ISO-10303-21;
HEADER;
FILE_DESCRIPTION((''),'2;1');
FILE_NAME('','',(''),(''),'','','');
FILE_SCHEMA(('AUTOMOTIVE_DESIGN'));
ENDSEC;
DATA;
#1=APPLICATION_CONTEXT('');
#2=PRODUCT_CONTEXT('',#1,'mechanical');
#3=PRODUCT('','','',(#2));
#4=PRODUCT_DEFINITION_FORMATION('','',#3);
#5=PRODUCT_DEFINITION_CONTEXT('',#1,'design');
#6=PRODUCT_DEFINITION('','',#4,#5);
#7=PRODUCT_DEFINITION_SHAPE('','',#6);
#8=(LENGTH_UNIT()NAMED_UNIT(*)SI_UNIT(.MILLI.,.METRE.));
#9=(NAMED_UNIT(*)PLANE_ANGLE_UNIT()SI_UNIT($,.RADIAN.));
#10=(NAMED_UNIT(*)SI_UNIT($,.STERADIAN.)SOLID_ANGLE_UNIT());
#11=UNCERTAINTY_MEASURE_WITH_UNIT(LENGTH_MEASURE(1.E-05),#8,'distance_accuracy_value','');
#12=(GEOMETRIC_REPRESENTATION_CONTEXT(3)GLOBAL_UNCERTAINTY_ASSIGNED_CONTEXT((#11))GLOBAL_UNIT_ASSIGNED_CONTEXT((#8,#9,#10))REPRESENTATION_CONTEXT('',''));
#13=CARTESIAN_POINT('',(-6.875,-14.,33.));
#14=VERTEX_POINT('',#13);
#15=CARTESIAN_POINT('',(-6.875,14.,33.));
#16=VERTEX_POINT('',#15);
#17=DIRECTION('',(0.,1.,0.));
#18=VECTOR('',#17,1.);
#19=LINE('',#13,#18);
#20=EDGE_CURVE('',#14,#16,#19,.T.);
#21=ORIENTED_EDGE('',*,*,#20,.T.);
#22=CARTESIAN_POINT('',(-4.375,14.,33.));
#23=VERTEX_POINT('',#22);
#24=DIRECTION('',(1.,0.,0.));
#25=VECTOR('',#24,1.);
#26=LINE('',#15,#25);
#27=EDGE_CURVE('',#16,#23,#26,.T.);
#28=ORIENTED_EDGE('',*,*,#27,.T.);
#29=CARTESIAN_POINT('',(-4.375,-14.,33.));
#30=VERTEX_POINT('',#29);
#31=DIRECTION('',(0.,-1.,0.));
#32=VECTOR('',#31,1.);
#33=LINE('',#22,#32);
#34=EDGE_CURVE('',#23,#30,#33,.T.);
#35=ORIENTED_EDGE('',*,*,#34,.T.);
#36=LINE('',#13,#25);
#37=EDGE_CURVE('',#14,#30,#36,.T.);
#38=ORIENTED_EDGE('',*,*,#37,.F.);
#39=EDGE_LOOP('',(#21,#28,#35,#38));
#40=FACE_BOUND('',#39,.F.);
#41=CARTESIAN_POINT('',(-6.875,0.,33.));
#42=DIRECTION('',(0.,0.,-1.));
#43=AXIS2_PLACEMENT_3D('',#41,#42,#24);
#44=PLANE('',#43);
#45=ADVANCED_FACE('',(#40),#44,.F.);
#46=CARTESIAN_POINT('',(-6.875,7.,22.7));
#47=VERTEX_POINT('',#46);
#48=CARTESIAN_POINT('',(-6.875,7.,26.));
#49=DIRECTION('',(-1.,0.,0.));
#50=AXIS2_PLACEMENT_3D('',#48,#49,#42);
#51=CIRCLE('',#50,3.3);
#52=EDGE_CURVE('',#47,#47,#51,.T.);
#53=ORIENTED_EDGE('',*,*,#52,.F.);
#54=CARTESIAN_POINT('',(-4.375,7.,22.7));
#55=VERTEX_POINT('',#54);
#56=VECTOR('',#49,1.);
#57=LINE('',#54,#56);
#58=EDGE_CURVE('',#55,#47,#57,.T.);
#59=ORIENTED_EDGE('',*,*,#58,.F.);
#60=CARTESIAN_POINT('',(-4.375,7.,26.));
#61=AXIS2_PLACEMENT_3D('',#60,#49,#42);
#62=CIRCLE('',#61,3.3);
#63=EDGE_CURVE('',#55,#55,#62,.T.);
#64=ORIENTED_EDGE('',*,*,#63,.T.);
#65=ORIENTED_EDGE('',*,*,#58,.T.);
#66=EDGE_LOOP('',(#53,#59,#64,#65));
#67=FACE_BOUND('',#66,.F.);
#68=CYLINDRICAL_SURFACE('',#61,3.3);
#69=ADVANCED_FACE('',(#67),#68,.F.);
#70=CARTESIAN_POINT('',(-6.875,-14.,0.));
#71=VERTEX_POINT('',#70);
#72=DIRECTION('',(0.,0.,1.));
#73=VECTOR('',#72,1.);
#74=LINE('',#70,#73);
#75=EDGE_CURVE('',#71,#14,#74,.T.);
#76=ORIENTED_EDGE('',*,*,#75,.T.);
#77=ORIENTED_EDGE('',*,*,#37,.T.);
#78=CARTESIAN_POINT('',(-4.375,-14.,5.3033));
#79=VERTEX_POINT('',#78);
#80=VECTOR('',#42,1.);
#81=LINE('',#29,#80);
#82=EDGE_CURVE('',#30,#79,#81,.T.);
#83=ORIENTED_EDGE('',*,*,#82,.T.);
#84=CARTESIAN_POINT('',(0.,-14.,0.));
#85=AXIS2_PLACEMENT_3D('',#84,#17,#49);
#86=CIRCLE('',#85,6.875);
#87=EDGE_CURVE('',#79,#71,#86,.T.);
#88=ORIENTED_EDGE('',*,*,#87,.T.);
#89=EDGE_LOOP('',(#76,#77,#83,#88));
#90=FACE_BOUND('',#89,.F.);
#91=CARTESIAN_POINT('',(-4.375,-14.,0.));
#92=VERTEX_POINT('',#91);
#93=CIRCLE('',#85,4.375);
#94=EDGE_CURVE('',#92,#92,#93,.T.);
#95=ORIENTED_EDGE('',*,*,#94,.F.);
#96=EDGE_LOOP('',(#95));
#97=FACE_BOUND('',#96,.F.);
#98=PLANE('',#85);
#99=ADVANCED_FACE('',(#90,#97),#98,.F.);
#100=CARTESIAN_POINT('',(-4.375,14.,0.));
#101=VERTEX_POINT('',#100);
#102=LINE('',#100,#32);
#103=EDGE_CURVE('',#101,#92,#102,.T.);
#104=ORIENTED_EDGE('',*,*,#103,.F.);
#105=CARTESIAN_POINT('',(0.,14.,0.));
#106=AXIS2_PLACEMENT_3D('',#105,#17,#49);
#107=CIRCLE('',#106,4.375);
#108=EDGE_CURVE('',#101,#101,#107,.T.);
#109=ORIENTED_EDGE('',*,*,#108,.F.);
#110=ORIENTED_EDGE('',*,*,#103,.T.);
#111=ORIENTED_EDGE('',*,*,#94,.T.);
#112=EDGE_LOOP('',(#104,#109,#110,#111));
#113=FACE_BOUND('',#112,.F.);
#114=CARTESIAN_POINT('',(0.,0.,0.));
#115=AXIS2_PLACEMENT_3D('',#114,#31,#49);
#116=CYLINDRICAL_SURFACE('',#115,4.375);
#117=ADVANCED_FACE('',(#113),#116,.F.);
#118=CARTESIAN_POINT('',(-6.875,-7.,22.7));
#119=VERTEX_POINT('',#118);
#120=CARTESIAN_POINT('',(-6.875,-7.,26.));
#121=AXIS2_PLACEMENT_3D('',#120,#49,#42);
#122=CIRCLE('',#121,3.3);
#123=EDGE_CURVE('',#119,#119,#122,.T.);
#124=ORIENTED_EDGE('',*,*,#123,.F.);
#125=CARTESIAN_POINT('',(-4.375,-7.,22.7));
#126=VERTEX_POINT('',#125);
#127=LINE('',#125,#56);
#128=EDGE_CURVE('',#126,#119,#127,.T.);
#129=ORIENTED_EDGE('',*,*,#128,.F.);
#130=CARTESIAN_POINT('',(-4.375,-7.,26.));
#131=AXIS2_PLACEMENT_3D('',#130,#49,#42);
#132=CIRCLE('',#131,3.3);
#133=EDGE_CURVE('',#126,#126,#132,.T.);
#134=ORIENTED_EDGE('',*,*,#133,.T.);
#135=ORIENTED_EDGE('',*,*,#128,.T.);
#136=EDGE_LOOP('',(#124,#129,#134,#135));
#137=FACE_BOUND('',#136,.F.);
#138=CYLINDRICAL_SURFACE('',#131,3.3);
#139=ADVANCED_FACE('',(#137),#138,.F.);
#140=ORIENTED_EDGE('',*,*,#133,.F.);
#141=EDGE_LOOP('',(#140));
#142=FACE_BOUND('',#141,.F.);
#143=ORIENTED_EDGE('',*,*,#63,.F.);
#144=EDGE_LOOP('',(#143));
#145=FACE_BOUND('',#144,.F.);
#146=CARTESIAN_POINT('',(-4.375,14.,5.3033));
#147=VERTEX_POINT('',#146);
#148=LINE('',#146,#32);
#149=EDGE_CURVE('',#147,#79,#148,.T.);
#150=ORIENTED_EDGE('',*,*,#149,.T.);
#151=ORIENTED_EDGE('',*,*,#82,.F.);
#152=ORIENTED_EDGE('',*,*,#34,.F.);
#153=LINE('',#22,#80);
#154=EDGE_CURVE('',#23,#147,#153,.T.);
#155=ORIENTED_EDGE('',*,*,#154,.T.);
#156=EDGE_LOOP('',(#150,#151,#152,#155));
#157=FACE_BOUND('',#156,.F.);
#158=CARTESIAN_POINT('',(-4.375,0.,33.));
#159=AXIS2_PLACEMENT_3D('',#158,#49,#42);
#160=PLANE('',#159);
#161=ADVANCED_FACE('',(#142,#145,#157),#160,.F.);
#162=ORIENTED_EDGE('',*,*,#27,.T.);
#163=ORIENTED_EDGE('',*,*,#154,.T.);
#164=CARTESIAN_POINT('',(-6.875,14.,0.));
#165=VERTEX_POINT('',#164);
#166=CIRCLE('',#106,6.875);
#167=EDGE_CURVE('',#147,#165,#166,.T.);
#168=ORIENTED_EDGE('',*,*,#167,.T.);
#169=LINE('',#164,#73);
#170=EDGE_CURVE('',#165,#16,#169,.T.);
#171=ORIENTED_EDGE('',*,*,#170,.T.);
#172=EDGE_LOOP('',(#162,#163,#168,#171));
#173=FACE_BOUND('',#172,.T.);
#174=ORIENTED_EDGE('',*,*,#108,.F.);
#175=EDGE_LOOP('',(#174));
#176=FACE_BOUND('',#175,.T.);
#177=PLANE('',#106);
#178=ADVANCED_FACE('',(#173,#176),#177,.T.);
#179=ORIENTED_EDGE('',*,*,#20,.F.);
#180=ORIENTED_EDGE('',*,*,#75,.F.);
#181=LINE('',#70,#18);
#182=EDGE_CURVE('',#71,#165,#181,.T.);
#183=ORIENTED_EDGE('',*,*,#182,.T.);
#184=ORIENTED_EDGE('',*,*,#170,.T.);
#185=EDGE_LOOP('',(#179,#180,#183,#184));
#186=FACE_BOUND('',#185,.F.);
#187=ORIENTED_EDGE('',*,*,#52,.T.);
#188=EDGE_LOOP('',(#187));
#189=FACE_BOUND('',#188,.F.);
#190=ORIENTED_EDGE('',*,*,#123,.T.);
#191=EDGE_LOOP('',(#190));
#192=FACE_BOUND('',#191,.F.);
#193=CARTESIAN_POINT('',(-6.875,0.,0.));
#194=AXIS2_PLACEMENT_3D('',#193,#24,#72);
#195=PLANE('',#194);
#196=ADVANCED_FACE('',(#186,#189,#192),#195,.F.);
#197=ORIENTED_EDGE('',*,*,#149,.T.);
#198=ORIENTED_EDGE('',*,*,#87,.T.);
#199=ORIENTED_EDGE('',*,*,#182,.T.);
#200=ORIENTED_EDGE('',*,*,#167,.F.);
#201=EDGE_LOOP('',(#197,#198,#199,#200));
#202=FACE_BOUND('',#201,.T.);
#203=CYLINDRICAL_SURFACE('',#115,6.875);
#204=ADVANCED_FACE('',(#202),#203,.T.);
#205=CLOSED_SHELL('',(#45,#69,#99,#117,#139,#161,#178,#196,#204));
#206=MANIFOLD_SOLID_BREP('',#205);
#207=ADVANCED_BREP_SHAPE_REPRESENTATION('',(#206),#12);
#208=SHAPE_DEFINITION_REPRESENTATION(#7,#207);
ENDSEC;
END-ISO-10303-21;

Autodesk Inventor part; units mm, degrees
ref_plane "YZ Plane" through (0, 0, 0) normal (1, 0, 0) x (0, 1, 0)
ref_plane "XZ Plane" through (0, 0, 0) normal (0, 1, 0) x (-1, 0, 0)
ref_plane "XY Plane" through (0, 0, 0) normal (0, 0, 1) x (1, 0, 0)
sketch "Sketch1" plane through (0, 0, 0) normal (0, 1, 0) x (-1, 0, 0)
  circle A0 centre (0, 0) radius 3.875
  circle A1 centre (0, 0) radius 4.375
  circle A2 centre (0, 0) radius 6.875
  line L0 (6.875, 0) -> (6.875, 33)
  line L1 (6.875, 33) -> (4.375, 33)
  line L2 (4.375, 33) -> (4.375, 5.3033)
  dimension "d0" = 7.75
  dimension "d1" = 8.75
  dimension "d2" = 13.75
  dimension "d3" = 33
  dimension "d4" = 2.5
extrude "Extrusion1" add sketch "Sketch1" along normal mid plane 28 contours A2 | A2 L2 L1 L0
sketch "Sketch4" plane through (-4.375, -14, 33) normal (1, 0, 0) x (0, 0, -1)
  line L0 (0, 28) -> (27.6967, 28) projected
  line L1 (0, 0) -> (0, 28) projected
  line L2 (0, 14) -> (27.6967, 14)
  line L3 (0, 14) -> (7, 14)
  line L4 (7, 14) -> (7, 7)
  line L5 (7, 14) -> (7, 21)
  point P0 (33, 14)
  dimension "d7" = 14
  dimension "d17" = 7
  dimension "d18" = 7
  dimension "d19" = 7
hole "Hole1" at (-4.375, -7, 26) at (-4.375, 7, 26) direction (-1, 0, 0) diameter 6.6 end up to surface clearance for "Countersunk Flat Head Screw ISO 2009/7046" size "M6" standard "ISO"
properties part number "SP29V1 Bisagra P1" material "Steel"
